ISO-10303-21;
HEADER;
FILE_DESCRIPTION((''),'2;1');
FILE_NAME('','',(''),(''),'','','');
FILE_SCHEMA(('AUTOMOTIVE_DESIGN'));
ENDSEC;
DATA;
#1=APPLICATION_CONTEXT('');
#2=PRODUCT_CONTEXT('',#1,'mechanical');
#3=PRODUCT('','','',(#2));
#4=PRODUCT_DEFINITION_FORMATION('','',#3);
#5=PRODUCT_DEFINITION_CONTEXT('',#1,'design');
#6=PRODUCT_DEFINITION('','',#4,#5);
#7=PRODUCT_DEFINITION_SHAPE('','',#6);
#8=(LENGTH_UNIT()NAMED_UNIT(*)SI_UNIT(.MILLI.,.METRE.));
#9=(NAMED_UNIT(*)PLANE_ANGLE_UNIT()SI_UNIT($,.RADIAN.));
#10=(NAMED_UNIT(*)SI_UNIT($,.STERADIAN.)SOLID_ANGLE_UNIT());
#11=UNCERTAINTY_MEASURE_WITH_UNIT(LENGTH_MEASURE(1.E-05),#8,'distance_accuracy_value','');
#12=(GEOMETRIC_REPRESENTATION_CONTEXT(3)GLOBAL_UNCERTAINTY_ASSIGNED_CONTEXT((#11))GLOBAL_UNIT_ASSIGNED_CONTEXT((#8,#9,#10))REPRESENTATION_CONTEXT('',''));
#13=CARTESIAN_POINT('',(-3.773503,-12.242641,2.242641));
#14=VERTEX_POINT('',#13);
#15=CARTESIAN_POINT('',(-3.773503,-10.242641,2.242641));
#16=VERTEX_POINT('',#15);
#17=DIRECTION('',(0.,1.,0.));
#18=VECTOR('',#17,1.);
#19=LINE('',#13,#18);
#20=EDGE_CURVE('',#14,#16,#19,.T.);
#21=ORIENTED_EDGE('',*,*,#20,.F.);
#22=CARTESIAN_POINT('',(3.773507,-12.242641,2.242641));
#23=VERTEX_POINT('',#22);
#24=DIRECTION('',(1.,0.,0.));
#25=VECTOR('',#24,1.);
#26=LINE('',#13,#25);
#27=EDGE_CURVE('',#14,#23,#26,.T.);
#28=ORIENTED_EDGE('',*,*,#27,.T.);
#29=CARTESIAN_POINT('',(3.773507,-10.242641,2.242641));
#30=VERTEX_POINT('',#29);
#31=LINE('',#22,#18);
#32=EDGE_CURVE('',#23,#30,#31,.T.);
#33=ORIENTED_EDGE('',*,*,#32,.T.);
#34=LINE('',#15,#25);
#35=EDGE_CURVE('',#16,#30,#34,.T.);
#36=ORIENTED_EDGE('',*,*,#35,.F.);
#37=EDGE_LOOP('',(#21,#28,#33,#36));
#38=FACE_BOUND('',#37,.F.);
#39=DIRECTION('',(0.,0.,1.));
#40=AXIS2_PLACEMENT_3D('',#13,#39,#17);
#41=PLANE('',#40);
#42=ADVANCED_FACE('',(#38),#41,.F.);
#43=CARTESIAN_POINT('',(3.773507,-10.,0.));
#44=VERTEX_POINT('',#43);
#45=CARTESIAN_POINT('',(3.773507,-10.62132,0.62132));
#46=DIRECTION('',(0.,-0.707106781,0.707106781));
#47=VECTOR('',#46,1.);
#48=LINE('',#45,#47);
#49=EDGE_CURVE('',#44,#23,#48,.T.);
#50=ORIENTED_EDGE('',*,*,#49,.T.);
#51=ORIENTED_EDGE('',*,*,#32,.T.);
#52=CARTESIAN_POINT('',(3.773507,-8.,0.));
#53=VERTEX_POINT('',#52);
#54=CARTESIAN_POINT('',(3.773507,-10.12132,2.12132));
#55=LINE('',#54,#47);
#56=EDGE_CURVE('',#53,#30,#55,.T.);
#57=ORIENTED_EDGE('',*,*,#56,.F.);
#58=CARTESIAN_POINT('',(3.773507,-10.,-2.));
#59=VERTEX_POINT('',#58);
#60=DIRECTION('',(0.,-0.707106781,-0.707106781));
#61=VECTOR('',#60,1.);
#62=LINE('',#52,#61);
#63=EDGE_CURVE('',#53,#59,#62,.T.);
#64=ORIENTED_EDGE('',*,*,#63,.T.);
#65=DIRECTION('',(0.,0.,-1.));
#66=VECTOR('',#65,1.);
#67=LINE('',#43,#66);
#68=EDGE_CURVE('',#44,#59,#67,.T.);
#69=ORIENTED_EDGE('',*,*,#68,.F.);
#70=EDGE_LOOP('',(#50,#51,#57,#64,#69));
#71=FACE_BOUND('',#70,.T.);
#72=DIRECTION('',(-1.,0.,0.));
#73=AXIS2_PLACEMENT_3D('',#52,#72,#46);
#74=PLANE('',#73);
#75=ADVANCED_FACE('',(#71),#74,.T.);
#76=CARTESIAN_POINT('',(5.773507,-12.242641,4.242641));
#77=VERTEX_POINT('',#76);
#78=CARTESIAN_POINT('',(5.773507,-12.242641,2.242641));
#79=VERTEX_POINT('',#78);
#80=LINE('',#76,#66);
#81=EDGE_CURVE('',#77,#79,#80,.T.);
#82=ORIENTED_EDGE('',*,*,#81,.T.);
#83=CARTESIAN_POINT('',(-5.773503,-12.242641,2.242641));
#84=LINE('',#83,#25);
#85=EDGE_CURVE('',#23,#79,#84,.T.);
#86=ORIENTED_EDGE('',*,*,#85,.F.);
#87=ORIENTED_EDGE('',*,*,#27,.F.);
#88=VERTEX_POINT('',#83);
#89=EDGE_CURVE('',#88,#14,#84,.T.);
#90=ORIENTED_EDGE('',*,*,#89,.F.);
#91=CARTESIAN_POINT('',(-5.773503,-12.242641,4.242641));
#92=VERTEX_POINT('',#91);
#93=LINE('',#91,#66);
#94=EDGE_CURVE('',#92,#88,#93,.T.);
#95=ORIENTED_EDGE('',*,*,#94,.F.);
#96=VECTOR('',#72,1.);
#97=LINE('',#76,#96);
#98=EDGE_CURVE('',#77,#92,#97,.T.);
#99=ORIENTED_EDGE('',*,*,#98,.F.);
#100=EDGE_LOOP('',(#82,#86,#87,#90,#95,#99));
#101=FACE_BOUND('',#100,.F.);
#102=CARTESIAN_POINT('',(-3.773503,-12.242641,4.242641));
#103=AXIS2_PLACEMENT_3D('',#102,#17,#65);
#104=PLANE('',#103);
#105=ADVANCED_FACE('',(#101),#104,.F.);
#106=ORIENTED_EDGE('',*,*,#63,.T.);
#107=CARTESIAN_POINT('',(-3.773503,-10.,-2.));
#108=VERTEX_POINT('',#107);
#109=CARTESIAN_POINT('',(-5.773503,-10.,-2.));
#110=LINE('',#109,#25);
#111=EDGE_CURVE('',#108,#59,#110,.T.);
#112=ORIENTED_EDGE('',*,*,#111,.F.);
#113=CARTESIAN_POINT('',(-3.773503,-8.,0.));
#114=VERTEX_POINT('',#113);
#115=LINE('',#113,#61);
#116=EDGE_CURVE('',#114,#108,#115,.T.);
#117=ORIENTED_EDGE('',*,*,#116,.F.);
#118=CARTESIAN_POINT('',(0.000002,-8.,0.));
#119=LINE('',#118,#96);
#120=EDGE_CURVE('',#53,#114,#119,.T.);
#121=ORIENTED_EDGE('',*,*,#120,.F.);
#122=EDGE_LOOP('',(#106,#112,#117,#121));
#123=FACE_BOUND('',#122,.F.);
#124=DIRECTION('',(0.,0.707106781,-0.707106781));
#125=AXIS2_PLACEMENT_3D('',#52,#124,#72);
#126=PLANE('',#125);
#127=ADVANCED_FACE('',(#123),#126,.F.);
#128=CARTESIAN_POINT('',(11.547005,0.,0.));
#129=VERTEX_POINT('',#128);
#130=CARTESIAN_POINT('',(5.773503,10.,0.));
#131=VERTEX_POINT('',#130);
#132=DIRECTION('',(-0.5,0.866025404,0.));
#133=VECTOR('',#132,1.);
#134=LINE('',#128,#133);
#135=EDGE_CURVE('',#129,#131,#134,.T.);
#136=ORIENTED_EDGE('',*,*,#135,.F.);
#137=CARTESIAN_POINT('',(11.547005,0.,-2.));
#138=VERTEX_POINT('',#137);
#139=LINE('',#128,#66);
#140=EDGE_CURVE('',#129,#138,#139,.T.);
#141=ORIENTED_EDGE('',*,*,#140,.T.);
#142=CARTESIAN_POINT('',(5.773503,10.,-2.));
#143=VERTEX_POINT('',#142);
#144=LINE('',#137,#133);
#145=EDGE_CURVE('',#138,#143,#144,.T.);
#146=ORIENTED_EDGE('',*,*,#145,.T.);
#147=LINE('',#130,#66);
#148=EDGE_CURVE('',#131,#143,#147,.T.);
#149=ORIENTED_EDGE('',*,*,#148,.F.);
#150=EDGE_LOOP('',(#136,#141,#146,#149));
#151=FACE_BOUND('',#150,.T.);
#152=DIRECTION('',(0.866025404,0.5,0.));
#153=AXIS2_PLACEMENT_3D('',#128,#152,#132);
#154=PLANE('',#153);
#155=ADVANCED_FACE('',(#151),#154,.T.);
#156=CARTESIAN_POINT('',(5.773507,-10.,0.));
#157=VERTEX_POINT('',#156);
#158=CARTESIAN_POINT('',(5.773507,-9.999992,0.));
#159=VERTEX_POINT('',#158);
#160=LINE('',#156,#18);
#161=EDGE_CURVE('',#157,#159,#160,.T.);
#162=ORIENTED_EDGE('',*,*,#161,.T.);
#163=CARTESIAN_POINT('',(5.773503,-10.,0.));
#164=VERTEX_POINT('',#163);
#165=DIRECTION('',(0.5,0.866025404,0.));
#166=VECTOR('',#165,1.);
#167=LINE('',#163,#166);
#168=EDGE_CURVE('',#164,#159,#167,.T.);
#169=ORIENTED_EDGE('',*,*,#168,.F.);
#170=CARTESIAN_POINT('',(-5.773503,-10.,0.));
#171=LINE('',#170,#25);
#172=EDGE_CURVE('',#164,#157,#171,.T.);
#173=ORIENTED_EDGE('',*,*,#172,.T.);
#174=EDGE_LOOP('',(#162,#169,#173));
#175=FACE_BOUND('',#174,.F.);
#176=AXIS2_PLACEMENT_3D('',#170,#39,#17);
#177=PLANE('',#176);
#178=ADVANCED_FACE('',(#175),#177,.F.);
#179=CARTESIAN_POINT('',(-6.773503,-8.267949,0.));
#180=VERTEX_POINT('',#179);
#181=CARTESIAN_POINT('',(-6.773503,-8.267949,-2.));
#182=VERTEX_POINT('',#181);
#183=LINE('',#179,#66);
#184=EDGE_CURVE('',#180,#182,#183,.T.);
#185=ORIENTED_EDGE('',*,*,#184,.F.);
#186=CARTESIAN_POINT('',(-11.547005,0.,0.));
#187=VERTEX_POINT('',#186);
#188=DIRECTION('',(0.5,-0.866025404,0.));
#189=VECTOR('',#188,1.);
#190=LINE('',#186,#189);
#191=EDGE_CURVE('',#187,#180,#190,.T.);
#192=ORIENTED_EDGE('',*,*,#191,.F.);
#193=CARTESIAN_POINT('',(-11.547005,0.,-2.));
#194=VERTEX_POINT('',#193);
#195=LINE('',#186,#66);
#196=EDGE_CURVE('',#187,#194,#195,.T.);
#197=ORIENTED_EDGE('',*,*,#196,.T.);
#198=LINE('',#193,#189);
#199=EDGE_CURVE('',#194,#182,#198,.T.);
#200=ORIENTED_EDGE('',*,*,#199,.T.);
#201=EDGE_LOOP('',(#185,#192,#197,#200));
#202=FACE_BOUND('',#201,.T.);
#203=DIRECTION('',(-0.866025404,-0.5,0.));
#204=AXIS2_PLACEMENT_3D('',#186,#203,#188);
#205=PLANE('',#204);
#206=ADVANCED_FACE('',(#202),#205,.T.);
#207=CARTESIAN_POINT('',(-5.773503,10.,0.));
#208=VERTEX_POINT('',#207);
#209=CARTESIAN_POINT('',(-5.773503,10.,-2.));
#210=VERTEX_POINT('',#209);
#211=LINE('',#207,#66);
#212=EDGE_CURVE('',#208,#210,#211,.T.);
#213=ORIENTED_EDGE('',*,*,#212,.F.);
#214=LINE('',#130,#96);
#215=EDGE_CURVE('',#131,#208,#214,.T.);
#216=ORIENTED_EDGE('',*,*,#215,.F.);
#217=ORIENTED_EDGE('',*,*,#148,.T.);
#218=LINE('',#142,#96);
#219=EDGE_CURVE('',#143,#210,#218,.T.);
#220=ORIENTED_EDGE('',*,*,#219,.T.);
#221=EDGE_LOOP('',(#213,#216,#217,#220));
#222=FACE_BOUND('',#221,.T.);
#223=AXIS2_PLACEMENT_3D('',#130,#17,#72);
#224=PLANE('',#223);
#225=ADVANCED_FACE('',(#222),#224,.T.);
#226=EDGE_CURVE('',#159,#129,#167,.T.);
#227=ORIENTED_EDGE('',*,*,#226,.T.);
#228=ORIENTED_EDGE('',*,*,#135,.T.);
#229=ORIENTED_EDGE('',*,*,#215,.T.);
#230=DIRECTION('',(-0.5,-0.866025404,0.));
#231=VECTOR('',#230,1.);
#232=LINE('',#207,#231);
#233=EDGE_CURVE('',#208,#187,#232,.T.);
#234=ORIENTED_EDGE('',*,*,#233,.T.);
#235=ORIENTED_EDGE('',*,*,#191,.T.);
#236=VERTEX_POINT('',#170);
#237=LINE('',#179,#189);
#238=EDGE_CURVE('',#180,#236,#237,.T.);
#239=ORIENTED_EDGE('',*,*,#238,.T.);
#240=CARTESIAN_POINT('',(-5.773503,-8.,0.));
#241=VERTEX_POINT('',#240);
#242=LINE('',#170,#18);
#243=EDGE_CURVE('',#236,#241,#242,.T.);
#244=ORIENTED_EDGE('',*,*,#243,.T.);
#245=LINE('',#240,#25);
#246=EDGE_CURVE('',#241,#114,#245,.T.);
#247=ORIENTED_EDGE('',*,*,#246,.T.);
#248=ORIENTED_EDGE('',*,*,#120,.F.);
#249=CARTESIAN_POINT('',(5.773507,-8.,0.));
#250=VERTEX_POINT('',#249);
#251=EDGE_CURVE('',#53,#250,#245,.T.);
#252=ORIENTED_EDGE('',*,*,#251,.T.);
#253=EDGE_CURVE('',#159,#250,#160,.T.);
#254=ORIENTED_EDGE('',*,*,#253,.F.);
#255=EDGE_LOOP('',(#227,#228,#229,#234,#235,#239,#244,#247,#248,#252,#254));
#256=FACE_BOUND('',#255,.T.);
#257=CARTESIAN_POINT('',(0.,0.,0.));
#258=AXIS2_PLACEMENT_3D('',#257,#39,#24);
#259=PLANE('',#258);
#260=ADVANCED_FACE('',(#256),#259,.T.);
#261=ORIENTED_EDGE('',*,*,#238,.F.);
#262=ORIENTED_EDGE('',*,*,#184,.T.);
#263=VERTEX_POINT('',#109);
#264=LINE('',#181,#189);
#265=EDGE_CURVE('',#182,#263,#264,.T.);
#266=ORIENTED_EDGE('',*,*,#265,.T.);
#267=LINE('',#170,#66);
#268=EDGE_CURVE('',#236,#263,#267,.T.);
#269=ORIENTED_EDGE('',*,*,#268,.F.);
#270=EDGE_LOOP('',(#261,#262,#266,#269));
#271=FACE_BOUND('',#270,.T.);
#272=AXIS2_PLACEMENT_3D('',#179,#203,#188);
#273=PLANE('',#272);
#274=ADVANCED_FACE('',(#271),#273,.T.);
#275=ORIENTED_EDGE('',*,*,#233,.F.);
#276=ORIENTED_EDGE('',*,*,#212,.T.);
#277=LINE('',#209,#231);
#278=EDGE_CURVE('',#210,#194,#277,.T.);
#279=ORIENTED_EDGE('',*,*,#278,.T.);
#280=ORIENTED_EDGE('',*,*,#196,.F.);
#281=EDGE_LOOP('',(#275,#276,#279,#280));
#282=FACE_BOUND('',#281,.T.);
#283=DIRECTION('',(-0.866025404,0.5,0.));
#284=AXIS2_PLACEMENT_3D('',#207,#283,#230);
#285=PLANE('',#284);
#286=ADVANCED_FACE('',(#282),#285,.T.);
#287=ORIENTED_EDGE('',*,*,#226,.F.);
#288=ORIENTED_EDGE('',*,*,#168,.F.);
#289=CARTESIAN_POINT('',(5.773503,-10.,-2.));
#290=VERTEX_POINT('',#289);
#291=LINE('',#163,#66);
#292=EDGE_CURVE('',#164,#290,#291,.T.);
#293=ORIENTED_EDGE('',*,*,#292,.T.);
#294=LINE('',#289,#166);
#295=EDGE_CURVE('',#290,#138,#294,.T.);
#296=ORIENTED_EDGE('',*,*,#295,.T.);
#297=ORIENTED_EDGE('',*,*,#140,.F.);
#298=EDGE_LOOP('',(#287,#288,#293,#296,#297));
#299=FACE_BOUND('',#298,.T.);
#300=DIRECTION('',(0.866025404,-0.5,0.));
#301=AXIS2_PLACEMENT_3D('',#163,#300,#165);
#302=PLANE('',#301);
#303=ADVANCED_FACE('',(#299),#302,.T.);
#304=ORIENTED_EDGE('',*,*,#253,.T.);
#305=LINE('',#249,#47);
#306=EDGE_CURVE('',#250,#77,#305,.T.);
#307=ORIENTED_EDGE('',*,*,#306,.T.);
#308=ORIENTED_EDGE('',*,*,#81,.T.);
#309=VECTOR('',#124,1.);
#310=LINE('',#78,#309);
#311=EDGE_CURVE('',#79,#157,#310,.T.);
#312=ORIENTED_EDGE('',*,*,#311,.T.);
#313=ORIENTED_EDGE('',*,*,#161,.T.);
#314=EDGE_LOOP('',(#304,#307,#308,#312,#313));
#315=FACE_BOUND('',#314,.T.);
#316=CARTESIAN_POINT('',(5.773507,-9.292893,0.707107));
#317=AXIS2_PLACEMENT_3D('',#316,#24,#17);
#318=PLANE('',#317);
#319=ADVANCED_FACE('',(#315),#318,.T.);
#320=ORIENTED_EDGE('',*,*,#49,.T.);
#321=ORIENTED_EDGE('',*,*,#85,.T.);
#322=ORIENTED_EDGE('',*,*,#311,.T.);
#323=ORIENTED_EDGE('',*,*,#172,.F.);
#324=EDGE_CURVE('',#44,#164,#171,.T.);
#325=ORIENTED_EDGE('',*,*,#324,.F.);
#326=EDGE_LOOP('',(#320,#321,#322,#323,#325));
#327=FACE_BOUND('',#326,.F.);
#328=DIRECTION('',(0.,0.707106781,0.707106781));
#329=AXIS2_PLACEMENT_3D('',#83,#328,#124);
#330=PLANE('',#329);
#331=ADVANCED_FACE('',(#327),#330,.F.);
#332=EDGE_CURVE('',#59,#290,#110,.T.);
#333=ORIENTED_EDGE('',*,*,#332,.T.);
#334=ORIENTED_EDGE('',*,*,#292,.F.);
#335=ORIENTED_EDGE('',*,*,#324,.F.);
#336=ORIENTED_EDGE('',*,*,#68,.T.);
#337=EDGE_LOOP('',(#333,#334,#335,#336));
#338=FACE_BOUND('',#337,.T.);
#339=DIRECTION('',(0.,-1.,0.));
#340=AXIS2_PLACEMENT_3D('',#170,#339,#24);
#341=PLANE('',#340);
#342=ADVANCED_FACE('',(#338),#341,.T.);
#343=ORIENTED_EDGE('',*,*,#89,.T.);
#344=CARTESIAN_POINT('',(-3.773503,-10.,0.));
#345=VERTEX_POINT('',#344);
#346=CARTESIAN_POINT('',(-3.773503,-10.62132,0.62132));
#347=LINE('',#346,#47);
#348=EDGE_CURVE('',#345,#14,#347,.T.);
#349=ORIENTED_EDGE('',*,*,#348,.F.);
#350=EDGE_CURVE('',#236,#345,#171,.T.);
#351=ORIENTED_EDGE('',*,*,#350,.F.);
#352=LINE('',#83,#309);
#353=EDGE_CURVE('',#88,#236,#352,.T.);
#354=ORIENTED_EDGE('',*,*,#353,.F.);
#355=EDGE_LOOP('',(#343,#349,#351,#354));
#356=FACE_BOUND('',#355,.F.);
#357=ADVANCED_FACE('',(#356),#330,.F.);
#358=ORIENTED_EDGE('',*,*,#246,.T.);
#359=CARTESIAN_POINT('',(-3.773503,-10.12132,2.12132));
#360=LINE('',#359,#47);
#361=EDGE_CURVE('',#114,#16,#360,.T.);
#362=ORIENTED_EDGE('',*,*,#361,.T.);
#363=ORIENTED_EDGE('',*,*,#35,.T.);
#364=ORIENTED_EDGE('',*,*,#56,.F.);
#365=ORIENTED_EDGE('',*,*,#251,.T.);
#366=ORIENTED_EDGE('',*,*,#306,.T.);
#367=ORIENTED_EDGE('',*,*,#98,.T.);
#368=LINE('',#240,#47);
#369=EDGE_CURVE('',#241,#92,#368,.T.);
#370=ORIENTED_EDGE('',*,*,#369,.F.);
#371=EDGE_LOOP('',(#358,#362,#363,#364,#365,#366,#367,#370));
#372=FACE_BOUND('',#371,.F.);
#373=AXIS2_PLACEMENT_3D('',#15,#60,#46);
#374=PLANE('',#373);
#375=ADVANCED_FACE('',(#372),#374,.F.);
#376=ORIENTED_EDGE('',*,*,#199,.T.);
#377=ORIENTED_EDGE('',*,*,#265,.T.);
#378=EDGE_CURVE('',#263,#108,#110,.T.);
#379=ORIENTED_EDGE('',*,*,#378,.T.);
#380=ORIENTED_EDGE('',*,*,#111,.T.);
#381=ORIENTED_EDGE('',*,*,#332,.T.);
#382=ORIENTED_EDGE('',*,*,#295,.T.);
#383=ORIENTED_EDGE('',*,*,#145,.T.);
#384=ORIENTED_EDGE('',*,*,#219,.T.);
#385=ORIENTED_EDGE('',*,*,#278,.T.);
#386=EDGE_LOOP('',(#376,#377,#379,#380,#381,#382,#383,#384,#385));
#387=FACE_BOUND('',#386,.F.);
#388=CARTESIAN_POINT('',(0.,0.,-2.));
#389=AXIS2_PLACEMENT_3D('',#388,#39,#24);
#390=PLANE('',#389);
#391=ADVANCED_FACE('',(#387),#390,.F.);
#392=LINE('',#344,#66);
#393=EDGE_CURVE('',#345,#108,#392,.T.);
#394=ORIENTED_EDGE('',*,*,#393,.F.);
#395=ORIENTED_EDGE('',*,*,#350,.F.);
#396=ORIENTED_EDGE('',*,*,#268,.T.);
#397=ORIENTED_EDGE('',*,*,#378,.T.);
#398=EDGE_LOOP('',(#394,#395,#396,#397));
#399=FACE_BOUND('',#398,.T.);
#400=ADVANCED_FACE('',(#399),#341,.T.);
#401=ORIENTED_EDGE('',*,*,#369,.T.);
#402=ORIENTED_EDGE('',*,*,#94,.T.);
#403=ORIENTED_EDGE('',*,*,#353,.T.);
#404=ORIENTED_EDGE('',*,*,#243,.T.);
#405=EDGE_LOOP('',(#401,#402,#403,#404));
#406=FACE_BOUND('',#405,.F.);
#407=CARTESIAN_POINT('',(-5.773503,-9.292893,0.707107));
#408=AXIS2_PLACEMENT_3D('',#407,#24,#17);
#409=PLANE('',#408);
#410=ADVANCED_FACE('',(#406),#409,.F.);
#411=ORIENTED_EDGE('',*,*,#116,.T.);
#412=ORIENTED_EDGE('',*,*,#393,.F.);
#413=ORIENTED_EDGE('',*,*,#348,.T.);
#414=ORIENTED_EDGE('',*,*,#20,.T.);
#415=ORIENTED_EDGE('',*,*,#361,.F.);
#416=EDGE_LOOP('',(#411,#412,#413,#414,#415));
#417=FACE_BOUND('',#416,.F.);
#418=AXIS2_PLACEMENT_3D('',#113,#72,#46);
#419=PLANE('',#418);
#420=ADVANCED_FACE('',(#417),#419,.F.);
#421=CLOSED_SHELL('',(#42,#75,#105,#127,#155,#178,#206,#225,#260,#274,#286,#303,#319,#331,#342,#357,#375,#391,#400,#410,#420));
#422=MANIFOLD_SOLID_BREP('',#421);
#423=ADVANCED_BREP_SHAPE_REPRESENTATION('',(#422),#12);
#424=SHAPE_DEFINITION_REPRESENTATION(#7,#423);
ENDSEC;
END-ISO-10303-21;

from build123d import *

# Parameters (mm, degrees)
F1_DEPTH = 2
F4_DEPTH = 11.54701
F5_W     = 7.54701
F5_H     = 6
F6_DEPTH = 25
F8_DEPTH = 7.54701


# Not quite as in the source:
# - the program builds the solid bodies; features that only make, move or delete a surface that nothing else refers to are left out


with BuildPart() as f1:
    # F0 (on Top) → F1 (new body)
    with BuildSketch(Plane.XY):
        Polygon((-3.7735026919, -10), (5.7735026919, -10), (11.5470053838, 0), (5.7735026919, 10), (0, 10), (-5.7735026919, 10), (-11.5470053838, 0), (-6.7735026919, -8.2679491924), (-5.7735026919, -10), align=None)
    extrude(amount=-F1_DEPTH)

    # F3 (on face) → F4 (join)
    with BuildSketch(Plane.YZ.offset(-5.7735026919)):
        Polygon((-10, 2), (-10, 0), (-8, 0), align=None)
        Polygon((-12.2426406871, 2.2426406871), (-10, 0), (-10, 2), (-12.2426406871, 4.2426406871), align=None)
    extrude(amount=F4_DEPTH)

    # F5 (on face) → F6 (cut)
    with BuildSketch(Plane(origin=(0, -4, -4), x_dir=(-1, 0, 0), z_dir=(0, 0.7071067812, 0.7071067812))):
        with Locations((-2.3081e-06, 8.6568542495)):
            Rectangle(F5_W, F5_H)
    extrude(amount=-F6_DEPTH, mode=Mode.SUBTRACT)

    # F7 (on face) → F8 (join, through all)
    with BuildSketch(Plane.YZ.offset(-3.7735026919)):
        Polygon((-12.2426406871, 4.2426406871), (-12.2426406871, 2.2426406871), (-10.2426406871, 2.2426406871), align=None)
    extrude(amount=F8_DEPTH)


solid = f1.part
